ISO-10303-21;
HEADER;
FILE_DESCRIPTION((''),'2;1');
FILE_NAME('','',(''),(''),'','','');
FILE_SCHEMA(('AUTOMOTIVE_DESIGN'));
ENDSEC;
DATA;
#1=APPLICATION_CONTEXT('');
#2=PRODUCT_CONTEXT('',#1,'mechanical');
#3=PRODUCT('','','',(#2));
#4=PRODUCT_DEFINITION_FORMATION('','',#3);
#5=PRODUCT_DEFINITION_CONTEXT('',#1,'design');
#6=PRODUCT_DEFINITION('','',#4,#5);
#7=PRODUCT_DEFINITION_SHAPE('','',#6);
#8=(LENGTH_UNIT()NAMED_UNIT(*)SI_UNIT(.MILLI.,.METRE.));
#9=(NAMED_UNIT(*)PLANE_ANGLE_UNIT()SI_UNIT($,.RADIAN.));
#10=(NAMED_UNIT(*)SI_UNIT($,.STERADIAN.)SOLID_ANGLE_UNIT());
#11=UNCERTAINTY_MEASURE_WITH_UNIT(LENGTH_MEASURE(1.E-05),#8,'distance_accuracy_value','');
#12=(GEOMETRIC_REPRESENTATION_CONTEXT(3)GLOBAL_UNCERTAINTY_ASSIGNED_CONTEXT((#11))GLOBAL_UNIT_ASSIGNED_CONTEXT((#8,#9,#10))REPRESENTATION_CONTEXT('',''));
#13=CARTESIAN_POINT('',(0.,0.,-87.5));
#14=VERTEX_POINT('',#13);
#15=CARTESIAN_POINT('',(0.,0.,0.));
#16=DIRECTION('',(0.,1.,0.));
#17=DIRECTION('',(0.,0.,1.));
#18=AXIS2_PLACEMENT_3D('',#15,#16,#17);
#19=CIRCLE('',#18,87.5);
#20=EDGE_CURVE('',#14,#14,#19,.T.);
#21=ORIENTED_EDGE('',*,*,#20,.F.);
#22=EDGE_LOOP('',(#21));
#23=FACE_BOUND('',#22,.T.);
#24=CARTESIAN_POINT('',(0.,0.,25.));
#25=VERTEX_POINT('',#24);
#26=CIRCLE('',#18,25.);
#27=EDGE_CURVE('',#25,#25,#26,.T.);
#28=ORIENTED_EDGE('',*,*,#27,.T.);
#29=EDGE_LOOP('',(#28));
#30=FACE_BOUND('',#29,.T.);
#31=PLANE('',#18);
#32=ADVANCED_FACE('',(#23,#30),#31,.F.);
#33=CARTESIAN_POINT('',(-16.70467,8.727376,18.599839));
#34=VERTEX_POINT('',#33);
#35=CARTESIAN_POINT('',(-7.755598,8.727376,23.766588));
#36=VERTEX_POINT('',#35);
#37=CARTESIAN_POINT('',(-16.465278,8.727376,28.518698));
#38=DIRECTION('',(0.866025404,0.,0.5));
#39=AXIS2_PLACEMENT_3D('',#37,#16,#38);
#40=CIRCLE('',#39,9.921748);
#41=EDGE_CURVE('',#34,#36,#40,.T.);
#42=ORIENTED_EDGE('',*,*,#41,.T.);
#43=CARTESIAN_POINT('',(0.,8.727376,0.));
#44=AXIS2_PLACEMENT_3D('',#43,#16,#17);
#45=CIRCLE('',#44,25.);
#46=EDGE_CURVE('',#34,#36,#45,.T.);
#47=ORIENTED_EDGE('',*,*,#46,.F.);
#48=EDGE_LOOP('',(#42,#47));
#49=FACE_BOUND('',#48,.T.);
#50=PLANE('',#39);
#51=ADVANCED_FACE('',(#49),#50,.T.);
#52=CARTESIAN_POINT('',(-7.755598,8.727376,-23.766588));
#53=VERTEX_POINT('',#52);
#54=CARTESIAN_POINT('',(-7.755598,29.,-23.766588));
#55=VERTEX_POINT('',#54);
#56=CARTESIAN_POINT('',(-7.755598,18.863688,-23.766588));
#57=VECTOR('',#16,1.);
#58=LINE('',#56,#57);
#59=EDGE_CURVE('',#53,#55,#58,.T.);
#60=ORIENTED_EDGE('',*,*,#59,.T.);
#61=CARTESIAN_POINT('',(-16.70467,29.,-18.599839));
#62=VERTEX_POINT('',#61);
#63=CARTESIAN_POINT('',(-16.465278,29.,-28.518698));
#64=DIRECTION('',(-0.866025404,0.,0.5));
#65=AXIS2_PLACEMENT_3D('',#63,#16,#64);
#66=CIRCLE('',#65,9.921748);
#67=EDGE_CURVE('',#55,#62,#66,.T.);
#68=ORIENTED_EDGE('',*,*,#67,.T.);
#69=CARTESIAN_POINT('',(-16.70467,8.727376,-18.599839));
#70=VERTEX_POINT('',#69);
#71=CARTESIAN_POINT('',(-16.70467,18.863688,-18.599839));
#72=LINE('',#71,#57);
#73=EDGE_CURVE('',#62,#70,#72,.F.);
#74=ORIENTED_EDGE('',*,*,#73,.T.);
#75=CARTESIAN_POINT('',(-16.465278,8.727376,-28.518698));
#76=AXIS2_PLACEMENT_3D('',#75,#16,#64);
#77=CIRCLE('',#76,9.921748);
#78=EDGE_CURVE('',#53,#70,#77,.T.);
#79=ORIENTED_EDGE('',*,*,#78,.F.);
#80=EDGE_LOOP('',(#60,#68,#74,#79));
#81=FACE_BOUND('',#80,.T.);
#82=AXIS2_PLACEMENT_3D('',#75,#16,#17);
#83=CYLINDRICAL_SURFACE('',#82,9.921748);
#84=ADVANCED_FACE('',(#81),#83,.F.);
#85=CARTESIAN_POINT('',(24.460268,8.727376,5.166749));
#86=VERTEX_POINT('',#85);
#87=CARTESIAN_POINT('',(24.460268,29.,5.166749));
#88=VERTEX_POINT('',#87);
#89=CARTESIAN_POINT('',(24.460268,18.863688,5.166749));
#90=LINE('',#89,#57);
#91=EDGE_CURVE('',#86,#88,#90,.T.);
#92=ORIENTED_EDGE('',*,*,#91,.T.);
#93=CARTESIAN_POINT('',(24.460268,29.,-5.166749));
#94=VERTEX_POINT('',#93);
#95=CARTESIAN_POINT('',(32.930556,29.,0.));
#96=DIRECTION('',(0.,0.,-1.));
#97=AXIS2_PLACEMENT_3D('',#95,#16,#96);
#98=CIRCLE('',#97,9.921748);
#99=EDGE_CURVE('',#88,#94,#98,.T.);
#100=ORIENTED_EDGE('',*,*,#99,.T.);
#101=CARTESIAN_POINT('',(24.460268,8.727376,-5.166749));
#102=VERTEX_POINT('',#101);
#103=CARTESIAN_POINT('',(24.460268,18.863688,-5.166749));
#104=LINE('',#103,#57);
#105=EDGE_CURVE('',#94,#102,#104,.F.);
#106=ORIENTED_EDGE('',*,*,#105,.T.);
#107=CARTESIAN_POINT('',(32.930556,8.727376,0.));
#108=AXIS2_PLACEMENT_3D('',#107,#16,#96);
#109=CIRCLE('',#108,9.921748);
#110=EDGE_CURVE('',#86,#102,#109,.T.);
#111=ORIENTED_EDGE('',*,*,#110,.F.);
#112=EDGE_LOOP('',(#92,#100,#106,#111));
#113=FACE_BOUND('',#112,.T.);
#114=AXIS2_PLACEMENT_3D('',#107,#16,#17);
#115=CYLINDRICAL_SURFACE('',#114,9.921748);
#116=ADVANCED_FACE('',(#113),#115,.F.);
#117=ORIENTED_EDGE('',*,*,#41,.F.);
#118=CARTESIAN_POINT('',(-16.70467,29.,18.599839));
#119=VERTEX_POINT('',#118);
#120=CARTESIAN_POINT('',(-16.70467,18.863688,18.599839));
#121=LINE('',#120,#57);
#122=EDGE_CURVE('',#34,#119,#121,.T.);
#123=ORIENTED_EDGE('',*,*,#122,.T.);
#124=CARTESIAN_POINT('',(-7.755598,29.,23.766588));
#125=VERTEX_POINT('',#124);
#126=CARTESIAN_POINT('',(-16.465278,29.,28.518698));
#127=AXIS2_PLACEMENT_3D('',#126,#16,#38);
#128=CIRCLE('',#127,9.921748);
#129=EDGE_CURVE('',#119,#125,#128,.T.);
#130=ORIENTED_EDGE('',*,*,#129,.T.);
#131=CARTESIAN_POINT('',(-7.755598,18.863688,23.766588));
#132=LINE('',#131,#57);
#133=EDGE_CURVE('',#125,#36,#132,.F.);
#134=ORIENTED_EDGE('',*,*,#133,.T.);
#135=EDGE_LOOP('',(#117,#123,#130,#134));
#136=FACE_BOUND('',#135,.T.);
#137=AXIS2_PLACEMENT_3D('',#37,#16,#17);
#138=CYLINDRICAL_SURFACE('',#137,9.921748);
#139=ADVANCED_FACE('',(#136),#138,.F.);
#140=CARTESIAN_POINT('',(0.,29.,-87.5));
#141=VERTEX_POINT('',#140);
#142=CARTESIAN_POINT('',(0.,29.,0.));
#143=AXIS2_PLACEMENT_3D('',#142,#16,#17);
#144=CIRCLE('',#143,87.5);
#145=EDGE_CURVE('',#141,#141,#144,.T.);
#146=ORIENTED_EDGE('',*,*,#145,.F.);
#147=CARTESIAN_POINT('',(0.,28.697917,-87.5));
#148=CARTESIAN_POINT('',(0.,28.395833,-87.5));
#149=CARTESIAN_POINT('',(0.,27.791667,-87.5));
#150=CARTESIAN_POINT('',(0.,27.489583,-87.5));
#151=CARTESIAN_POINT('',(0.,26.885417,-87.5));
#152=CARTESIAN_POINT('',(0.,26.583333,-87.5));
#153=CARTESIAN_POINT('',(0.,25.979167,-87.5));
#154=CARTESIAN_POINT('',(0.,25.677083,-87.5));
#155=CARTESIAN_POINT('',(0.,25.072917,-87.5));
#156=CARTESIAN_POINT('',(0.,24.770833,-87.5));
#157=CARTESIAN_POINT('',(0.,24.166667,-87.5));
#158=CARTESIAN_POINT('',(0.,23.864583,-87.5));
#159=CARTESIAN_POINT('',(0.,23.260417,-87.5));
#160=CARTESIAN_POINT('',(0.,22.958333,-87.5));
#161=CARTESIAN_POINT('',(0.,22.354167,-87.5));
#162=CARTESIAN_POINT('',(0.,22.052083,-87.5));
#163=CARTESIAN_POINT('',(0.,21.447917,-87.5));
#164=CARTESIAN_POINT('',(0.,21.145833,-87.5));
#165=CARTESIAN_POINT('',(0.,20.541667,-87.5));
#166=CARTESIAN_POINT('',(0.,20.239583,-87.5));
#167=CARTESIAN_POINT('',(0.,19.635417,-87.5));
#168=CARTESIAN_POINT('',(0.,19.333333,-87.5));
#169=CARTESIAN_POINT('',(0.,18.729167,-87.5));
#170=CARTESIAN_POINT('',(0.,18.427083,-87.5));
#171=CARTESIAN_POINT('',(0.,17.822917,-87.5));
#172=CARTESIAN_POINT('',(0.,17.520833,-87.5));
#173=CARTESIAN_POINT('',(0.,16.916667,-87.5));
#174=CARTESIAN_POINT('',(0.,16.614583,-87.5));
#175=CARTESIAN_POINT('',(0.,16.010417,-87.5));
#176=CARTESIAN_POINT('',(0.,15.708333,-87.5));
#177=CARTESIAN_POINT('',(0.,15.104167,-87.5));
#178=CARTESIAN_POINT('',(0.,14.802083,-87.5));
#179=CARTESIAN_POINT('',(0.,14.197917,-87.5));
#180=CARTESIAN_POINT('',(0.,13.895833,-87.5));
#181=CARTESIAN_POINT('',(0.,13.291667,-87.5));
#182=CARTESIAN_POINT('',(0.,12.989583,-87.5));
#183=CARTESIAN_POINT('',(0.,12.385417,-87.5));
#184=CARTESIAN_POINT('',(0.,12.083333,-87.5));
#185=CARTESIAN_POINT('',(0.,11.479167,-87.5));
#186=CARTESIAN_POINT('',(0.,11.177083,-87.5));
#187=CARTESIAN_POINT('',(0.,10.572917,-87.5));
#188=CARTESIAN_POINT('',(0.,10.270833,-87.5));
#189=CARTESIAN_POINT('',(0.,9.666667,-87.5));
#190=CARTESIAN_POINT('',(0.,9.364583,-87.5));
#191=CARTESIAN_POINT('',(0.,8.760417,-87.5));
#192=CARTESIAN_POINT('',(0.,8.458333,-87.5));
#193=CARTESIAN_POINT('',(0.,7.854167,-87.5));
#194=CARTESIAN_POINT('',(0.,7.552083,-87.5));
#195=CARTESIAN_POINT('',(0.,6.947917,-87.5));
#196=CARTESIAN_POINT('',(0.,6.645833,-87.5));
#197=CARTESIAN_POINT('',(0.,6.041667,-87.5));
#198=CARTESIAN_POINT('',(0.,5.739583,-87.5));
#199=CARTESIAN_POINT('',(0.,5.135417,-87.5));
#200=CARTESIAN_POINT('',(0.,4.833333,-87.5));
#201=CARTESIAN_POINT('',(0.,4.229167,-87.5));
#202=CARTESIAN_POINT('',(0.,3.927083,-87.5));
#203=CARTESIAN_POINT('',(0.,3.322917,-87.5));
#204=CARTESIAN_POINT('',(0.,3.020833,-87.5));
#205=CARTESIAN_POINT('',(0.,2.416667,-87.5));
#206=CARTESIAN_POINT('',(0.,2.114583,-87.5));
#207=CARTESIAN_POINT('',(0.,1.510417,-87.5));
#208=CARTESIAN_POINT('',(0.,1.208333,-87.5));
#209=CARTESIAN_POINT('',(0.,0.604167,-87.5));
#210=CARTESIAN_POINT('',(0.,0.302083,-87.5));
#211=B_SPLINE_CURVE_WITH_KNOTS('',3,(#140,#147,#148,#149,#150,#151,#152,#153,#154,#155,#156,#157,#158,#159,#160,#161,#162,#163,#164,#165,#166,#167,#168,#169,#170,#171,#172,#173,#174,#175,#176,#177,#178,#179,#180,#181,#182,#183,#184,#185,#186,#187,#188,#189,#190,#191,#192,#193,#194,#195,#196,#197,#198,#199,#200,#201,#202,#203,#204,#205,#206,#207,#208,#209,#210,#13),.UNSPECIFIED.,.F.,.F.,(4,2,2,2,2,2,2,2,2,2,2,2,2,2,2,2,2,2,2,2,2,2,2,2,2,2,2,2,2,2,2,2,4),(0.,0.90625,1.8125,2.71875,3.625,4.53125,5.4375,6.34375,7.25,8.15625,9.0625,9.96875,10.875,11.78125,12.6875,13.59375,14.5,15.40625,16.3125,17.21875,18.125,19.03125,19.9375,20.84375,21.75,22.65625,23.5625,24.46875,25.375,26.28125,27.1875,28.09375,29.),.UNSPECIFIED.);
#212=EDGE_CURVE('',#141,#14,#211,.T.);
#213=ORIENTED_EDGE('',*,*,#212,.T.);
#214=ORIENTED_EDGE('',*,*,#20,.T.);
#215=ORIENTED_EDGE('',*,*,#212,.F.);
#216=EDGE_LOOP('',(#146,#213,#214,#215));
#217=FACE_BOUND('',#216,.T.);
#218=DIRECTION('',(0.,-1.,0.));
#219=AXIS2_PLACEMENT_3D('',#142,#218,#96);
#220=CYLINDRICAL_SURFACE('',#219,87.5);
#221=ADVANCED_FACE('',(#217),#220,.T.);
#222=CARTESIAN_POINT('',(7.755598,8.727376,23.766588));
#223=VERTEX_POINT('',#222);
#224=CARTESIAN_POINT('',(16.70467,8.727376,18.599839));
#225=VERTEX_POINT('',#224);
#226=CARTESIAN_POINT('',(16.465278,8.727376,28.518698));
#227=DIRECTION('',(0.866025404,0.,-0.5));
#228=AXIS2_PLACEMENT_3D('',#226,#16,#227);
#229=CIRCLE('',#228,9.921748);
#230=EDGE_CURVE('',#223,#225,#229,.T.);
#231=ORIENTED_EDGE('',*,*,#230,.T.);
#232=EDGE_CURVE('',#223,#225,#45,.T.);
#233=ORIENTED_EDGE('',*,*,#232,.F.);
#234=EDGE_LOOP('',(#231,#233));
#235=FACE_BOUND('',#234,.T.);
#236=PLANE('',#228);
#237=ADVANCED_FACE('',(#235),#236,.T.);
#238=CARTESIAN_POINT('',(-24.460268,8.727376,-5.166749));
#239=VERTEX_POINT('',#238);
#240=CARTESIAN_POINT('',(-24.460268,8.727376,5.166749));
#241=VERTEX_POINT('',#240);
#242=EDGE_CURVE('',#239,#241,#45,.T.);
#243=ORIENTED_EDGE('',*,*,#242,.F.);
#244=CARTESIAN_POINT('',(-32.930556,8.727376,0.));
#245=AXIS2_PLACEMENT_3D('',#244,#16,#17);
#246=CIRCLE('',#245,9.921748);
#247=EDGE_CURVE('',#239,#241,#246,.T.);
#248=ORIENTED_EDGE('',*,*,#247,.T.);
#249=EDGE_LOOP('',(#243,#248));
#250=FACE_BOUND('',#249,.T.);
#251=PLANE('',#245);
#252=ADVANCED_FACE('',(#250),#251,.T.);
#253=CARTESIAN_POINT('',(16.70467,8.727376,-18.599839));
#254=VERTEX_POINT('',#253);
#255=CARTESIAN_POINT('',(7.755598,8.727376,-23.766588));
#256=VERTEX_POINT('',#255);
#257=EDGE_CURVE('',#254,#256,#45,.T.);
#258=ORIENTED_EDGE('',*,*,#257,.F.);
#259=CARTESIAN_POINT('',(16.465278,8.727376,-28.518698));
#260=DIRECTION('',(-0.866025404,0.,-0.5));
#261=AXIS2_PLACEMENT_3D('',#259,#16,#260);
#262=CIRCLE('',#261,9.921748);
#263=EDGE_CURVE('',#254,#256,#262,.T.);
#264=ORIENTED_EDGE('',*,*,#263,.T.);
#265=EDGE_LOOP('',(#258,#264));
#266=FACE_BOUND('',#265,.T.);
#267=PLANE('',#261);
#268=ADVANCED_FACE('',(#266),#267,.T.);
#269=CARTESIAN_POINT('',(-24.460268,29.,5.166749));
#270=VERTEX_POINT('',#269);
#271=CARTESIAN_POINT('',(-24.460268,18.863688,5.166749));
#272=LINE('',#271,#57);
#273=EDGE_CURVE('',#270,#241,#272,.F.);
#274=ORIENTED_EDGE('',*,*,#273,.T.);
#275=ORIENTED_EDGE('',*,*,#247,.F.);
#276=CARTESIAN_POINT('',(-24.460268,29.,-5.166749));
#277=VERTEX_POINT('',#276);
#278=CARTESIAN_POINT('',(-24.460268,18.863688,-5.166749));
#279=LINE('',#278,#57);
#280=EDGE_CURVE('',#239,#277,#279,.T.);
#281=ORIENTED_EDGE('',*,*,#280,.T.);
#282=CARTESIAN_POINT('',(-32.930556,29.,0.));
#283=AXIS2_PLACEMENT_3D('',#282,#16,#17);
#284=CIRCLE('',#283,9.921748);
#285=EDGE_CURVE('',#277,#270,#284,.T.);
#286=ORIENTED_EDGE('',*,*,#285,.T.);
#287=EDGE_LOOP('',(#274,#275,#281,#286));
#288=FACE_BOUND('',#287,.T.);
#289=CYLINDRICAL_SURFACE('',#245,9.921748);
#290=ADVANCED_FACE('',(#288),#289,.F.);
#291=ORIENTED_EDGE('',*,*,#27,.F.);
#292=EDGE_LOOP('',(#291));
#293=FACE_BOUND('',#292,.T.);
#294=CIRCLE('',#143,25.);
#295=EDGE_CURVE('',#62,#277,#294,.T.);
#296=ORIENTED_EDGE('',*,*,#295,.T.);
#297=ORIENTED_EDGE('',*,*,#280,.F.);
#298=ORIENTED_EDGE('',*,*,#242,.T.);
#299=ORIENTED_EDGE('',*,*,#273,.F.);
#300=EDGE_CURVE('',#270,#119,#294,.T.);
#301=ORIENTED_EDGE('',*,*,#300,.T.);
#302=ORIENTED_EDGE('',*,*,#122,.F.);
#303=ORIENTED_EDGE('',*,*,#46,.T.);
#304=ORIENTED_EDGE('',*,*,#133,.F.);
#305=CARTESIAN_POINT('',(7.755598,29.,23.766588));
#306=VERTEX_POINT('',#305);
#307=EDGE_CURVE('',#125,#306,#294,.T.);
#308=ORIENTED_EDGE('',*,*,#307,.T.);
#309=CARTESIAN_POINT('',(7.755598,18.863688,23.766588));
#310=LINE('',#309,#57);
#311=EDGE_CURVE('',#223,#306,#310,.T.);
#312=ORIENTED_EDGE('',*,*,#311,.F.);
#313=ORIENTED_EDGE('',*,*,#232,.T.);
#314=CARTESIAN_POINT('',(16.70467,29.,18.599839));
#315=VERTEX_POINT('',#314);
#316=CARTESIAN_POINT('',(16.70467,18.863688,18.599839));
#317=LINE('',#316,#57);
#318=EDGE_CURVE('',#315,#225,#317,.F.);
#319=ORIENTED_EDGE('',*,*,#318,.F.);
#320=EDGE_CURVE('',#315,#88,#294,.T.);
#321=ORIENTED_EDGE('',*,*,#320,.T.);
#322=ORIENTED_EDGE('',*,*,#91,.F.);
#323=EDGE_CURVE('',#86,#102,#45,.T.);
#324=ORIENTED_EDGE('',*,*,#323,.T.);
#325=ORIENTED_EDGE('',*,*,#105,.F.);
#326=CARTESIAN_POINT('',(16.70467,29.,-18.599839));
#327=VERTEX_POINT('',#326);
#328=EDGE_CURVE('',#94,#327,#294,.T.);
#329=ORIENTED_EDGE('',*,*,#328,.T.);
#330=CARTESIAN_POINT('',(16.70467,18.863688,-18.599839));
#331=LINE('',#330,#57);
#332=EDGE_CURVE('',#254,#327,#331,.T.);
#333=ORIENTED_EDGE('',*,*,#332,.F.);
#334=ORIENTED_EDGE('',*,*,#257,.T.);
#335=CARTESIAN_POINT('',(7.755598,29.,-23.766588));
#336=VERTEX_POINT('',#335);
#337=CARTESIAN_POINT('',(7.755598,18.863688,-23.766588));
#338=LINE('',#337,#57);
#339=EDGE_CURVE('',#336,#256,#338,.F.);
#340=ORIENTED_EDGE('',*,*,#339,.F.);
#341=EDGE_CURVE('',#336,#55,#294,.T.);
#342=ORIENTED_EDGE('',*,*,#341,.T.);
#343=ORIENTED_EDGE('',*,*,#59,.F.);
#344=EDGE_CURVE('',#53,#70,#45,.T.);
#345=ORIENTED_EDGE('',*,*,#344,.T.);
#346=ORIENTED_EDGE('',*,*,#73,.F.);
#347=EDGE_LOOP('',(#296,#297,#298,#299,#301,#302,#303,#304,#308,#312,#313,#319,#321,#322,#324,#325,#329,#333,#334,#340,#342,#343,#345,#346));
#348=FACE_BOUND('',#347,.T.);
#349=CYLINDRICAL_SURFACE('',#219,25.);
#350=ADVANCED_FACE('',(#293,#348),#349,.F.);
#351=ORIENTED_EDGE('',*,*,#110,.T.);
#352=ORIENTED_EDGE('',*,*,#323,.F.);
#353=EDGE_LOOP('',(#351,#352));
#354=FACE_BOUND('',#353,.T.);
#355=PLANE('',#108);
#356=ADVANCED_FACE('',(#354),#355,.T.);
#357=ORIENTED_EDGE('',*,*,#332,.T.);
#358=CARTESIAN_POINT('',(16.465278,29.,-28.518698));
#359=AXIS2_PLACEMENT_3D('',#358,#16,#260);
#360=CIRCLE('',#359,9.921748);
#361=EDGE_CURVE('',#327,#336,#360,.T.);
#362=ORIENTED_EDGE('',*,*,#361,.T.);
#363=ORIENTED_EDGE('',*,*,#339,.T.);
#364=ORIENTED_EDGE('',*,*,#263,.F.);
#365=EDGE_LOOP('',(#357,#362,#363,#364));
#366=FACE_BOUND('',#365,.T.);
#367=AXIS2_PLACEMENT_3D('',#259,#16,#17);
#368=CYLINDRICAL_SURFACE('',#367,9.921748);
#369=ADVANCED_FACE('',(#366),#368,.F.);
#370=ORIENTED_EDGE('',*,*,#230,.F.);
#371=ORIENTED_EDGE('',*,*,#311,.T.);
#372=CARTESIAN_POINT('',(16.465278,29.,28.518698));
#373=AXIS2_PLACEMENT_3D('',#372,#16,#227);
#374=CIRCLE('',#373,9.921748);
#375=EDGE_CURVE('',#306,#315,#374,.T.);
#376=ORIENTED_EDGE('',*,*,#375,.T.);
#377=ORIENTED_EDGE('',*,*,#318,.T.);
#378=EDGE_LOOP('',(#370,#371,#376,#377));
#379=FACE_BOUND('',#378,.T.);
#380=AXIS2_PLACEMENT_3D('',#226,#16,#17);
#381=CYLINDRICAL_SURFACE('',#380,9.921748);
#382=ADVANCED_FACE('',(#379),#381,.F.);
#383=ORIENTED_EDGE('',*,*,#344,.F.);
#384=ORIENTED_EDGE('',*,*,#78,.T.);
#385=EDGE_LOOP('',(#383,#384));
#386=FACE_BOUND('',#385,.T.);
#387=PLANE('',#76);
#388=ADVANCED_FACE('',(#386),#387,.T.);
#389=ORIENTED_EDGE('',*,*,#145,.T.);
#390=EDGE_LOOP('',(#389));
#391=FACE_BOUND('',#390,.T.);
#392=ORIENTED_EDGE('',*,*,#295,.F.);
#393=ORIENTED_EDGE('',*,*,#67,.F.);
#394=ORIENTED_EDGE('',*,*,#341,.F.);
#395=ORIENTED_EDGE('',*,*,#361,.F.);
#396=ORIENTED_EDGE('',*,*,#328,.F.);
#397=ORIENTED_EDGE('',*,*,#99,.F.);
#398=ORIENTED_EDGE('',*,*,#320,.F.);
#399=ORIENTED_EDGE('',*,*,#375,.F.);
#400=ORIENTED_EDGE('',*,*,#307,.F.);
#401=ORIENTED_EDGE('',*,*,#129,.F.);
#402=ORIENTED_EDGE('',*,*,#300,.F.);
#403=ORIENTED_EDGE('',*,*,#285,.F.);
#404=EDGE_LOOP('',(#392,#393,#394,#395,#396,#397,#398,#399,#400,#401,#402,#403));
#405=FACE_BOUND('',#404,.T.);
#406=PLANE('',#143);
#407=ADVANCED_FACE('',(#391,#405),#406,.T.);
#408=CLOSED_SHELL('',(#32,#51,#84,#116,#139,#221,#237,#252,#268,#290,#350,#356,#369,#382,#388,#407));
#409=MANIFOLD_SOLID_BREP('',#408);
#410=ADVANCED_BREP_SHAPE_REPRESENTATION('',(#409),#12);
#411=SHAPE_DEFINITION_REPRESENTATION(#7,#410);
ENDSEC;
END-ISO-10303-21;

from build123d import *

# Parameters (mm, degrees)
SKETCH1_R           = 87.5
BOSS_EXTRUDE1_DEPTH = 29
SKETCH2_R           = 25
CUT_EXTRUDE1_DEPTH  = 128.096420091
SKETCH3_R           = 9.921747731
CUT_EXTRUDE2_DEPTH  = 20.272624351
CIRPATTERN1_COUNT   = 6


with BuildPart() as part:
    # Sketch1 → Boss-Extrude1 (new body)
    with BuildSketch(Plane(origin=(0, 0, 0), x_dir=(1, 0, 0), z_dir=(0, 1, 0))):
        Circle(SKETCH1_R)
    extrude(amount=BOSS_EXTRUDE1_DEPTH)

    # Sketch2 → Cut-Extrude1 (cut, through all)
    with BuildSketch(Plane(origin=(0, 0, 0), x_dir=(1, 0, 0), z_dir=(0, 1, 0))):
        Circle(SKETCH2_R)
    extrude(amount=CUT_EXTRUDE1_DEPTH, mode=Mode.SUBTRACT)

    # Sketch3 → Cut-Extrude2 (cut)
    with BuildSketch(Plane(origin=(0, 29, 0), x_dir=(1, 0, 0), z_dir=(0, 1, 0))):
        with Locations((-32.93055591, 0)):
            Circle(SKETCH3_R)
    cut_extrude2 = extrude(amount=-CUT_EXTRUDE2_DEPTH, mode=Mode.SUBTRACT)

    # CirPattern1: Cut-Extrude2 ×6 about axis
    cirpattern1_axis = Axis((0, 0, 0), (0, 1, 0))
    for i in range(1, CIRPATTERN1_COUNT):
        add(cut_extrude2.rotate(cirpattern1_axis, i * 360 / CIRPATTERN1_COUNT), mode=Mode.SUBTRACT)


solid = part.part
